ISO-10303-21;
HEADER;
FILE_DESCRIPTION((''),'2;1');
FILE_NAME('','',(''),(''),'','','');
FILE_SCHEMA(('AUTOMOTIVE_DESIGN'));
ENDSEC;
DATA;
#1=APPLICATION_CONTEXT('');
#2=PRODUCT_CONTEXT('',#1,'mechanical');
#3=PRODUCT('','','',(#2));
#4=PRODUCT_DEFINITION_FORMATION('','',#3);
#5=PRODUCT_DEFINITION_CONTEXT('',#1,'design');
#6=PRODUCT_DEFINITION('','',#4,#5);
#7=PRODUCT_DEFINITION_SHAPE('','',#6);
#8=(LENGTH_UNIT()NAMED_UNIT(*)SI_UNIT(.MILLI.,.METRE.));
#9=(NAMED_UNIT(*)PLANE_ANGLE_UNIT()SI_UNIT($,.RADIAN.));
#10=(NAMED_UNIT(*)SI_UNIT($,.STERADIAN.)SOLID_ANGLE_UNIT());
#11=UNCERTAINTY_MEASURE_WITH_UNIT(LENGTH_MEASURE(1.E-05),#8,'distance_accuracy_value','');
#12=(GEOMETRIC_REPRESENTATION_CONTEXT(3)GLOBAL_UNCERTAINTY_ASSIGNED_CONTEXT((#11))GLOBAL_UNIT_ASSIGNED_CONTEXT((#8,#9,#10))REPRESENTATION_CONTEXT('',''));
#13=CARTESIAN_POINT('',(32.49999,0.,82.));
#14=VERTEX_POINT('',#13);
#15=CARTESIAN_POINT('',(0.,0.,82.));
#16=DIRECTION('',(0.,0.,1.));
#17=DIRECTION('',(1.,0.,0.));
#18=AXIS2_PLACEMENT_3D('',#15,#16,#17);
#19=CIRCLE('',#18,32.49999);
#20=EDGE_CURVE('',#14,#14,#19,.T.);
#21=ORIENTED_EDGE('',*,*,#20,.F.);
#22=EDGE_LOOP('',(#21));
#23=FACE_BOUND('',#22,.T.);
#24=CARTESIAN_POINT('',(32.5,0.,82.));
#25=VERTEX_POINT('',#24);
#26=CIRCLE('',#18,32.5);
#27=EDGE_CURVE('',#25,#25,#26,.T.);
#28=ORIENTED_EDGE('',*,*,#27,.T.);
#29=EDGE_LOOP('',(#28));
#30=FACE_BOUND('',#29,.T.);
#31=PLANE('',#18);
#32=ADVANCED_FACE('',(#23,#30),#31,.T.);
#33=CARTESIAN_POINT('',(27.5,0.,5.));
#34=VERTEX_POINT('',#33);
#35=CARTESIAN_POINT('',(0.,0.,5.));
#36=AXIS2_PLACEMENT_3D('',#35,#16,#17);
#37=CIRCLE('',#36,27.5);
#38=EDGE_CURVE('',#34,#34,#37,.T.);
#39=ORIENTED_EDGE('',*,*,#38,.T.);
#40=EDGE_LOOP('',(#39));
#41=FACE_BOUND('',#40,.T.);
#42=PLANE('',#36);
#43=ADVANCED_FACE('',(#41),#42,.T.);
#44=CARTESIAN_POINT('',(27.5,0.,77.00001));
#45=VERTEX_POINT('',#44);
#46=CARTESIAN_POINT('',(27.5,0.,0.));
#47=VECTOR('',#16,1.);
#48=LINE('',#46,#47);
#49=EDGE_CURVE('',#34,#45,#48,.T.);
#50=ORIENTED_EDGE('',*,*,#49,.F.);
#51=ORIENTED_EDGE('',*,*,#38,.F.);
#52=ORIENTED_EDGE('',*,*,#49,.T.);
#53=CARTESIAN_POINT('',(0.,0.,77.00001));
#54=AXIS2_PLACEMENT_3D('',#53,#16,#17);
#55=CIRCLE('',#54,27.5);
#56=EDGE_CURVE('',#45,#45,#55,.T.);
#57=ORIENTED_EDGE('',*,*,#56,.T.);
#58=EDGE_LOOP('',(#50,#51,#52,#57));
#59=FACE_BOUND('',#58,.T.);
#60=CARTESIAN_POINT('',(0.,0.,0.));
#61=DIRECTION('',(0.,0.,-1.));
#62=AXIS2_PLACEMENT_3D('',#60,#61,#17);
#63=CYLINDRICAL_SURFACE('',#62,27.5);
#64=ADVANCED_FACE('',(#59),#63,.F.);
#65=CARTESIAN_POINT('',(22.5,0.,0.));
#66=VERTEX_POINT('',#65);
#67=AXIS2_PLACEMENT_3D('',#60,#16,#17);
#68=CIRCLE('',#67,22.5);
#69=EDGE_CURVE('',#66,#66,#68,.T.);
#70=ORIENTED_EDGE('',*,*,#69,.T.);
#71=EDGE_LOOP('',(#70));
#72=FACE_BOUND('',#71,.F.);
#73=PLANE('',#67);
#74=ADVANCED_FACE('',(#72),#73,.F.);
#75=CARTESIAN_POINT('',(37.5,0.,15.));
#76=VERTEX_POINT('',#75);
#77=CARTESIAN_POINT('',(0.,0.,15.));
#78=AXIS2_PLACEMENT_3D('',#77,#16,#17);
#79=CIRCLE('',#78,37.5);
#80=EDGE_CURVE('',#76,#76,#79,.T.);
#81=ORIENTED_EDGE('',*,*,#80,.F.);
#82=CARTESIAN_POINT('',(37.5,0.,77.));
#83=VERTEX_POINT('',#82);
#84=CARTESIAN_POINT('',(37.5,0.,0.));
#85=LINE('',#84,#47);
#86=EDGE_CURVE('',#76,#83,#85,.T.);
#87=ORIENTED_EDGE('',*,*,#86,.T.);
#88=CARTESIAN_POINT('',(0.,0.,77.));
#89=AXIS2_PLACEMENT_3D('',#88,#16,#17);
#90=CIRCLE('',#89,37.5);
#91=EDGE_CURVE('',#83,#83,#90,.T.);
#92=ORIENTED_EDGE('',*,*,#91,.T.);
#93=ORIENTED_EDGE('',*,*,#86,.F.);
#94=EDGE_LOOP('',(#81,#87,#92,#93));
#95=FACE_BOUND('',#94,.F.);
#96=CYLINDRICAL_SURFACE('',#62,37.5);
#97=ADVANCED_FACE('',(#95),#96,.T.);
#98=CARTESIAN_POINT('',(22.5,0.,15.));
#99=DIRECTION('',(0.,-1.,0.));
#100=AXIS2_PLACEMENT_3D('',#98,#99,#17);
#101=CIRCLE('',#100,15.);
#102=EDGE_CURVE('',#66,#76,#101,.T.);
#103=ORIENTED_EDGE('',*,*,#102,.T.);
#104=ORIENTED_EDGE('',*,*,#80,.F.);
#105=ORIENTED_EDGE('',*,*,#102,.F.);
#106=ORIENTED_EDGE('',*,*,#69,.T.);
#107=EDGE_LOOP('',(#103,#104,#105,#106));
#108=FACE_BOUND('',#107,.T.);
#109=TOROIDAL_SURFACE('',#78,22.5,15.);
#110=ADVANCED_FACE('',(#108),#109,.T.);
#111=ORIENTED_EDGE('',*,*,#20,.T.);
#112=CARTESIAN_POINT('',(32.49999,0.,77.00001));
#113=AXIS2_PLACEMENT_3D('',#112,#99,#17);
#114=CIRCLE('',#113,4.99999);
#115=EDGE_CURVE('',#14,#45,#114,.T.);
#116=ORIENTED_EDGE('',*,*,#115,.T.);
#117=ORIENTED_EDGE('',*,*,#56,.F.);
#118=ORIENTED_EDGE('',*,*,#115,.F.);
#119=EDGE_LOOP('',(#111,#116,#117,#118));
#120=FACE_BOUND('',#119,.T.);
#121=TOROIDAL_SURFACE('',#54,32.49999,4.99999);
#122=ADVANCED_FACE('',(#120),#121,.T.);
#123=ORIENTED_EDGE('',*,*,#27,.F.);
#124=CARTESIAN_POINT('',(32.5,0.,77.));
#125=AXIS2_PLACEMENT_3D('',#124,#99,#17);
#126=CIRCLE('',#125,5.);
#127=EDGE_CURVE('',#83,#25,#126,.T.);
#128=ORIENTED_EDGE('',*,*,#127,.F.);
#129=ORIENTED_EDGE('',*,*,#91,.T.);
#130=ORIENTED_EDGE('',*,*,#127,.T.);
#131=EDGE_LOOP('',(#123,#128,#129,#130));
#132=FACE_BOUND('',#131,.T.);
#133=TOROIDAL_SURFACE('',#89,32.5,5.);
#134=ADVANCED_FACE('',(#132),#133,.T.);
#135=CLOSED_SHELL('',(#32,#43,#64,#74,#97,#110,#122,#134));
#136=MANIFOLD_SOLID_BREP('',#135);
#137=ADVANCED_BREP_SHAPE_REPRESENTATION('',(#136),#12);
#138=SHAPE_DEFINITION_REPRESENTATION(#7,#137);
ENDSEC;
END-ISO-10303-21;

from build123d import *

# Parameters (mm, degrees)
F0_R     = 37.5
F0_R_2   = 27.5
F1_DEPTH = 82
F2_DEPTH = 5
F3_R     = 15
F4_R     = 5
F5_R     = 4.99999


# Not quite as in the source:
# - a fillet or chamfer is up to 0.001 mm smaller than in the source, because OpenCascade refuses the exact size


with BuildPart() as f1:
    # F0 (on Top) → F1 (new body)
    with BuildSketch(Plane.XY):
        Circle(F0_R)
        Circle(F0_R_2, mode=Mode.SUBTRACT)
    extrude(amount=F1_DEPTH)

    # F0 (on Top) → F2 (join)
    with BuildSketch(Plane.XY):
        Circle(F0_R_2)
    extrude(amount=F2_DEPTH)

    # F3
    f3_edges = [f1.edges().sort_by_distance(p)[0] for p in [
        (-37.5, 0, 0),
    ]]
    fillet(f3_edges, radius=F3_R)

    # F4
    f4_edges = [f1.edges().sort_by_distance(p)[0] for p in [
        (-37.5, 0, 82),
    ]]
    fillet(f4_edges, radius=F4_R)

    # F5 (radius 5 in the source; OpenCascade refuses exactly that, so slightly less here)
    f5_edges = [f1.edges().sort_by_distance(p)[0] for p in [
        (-27.5, 0, 82),
    ]]
    fillet(f5_edges, radius=F5_R)


solid = f1.part
